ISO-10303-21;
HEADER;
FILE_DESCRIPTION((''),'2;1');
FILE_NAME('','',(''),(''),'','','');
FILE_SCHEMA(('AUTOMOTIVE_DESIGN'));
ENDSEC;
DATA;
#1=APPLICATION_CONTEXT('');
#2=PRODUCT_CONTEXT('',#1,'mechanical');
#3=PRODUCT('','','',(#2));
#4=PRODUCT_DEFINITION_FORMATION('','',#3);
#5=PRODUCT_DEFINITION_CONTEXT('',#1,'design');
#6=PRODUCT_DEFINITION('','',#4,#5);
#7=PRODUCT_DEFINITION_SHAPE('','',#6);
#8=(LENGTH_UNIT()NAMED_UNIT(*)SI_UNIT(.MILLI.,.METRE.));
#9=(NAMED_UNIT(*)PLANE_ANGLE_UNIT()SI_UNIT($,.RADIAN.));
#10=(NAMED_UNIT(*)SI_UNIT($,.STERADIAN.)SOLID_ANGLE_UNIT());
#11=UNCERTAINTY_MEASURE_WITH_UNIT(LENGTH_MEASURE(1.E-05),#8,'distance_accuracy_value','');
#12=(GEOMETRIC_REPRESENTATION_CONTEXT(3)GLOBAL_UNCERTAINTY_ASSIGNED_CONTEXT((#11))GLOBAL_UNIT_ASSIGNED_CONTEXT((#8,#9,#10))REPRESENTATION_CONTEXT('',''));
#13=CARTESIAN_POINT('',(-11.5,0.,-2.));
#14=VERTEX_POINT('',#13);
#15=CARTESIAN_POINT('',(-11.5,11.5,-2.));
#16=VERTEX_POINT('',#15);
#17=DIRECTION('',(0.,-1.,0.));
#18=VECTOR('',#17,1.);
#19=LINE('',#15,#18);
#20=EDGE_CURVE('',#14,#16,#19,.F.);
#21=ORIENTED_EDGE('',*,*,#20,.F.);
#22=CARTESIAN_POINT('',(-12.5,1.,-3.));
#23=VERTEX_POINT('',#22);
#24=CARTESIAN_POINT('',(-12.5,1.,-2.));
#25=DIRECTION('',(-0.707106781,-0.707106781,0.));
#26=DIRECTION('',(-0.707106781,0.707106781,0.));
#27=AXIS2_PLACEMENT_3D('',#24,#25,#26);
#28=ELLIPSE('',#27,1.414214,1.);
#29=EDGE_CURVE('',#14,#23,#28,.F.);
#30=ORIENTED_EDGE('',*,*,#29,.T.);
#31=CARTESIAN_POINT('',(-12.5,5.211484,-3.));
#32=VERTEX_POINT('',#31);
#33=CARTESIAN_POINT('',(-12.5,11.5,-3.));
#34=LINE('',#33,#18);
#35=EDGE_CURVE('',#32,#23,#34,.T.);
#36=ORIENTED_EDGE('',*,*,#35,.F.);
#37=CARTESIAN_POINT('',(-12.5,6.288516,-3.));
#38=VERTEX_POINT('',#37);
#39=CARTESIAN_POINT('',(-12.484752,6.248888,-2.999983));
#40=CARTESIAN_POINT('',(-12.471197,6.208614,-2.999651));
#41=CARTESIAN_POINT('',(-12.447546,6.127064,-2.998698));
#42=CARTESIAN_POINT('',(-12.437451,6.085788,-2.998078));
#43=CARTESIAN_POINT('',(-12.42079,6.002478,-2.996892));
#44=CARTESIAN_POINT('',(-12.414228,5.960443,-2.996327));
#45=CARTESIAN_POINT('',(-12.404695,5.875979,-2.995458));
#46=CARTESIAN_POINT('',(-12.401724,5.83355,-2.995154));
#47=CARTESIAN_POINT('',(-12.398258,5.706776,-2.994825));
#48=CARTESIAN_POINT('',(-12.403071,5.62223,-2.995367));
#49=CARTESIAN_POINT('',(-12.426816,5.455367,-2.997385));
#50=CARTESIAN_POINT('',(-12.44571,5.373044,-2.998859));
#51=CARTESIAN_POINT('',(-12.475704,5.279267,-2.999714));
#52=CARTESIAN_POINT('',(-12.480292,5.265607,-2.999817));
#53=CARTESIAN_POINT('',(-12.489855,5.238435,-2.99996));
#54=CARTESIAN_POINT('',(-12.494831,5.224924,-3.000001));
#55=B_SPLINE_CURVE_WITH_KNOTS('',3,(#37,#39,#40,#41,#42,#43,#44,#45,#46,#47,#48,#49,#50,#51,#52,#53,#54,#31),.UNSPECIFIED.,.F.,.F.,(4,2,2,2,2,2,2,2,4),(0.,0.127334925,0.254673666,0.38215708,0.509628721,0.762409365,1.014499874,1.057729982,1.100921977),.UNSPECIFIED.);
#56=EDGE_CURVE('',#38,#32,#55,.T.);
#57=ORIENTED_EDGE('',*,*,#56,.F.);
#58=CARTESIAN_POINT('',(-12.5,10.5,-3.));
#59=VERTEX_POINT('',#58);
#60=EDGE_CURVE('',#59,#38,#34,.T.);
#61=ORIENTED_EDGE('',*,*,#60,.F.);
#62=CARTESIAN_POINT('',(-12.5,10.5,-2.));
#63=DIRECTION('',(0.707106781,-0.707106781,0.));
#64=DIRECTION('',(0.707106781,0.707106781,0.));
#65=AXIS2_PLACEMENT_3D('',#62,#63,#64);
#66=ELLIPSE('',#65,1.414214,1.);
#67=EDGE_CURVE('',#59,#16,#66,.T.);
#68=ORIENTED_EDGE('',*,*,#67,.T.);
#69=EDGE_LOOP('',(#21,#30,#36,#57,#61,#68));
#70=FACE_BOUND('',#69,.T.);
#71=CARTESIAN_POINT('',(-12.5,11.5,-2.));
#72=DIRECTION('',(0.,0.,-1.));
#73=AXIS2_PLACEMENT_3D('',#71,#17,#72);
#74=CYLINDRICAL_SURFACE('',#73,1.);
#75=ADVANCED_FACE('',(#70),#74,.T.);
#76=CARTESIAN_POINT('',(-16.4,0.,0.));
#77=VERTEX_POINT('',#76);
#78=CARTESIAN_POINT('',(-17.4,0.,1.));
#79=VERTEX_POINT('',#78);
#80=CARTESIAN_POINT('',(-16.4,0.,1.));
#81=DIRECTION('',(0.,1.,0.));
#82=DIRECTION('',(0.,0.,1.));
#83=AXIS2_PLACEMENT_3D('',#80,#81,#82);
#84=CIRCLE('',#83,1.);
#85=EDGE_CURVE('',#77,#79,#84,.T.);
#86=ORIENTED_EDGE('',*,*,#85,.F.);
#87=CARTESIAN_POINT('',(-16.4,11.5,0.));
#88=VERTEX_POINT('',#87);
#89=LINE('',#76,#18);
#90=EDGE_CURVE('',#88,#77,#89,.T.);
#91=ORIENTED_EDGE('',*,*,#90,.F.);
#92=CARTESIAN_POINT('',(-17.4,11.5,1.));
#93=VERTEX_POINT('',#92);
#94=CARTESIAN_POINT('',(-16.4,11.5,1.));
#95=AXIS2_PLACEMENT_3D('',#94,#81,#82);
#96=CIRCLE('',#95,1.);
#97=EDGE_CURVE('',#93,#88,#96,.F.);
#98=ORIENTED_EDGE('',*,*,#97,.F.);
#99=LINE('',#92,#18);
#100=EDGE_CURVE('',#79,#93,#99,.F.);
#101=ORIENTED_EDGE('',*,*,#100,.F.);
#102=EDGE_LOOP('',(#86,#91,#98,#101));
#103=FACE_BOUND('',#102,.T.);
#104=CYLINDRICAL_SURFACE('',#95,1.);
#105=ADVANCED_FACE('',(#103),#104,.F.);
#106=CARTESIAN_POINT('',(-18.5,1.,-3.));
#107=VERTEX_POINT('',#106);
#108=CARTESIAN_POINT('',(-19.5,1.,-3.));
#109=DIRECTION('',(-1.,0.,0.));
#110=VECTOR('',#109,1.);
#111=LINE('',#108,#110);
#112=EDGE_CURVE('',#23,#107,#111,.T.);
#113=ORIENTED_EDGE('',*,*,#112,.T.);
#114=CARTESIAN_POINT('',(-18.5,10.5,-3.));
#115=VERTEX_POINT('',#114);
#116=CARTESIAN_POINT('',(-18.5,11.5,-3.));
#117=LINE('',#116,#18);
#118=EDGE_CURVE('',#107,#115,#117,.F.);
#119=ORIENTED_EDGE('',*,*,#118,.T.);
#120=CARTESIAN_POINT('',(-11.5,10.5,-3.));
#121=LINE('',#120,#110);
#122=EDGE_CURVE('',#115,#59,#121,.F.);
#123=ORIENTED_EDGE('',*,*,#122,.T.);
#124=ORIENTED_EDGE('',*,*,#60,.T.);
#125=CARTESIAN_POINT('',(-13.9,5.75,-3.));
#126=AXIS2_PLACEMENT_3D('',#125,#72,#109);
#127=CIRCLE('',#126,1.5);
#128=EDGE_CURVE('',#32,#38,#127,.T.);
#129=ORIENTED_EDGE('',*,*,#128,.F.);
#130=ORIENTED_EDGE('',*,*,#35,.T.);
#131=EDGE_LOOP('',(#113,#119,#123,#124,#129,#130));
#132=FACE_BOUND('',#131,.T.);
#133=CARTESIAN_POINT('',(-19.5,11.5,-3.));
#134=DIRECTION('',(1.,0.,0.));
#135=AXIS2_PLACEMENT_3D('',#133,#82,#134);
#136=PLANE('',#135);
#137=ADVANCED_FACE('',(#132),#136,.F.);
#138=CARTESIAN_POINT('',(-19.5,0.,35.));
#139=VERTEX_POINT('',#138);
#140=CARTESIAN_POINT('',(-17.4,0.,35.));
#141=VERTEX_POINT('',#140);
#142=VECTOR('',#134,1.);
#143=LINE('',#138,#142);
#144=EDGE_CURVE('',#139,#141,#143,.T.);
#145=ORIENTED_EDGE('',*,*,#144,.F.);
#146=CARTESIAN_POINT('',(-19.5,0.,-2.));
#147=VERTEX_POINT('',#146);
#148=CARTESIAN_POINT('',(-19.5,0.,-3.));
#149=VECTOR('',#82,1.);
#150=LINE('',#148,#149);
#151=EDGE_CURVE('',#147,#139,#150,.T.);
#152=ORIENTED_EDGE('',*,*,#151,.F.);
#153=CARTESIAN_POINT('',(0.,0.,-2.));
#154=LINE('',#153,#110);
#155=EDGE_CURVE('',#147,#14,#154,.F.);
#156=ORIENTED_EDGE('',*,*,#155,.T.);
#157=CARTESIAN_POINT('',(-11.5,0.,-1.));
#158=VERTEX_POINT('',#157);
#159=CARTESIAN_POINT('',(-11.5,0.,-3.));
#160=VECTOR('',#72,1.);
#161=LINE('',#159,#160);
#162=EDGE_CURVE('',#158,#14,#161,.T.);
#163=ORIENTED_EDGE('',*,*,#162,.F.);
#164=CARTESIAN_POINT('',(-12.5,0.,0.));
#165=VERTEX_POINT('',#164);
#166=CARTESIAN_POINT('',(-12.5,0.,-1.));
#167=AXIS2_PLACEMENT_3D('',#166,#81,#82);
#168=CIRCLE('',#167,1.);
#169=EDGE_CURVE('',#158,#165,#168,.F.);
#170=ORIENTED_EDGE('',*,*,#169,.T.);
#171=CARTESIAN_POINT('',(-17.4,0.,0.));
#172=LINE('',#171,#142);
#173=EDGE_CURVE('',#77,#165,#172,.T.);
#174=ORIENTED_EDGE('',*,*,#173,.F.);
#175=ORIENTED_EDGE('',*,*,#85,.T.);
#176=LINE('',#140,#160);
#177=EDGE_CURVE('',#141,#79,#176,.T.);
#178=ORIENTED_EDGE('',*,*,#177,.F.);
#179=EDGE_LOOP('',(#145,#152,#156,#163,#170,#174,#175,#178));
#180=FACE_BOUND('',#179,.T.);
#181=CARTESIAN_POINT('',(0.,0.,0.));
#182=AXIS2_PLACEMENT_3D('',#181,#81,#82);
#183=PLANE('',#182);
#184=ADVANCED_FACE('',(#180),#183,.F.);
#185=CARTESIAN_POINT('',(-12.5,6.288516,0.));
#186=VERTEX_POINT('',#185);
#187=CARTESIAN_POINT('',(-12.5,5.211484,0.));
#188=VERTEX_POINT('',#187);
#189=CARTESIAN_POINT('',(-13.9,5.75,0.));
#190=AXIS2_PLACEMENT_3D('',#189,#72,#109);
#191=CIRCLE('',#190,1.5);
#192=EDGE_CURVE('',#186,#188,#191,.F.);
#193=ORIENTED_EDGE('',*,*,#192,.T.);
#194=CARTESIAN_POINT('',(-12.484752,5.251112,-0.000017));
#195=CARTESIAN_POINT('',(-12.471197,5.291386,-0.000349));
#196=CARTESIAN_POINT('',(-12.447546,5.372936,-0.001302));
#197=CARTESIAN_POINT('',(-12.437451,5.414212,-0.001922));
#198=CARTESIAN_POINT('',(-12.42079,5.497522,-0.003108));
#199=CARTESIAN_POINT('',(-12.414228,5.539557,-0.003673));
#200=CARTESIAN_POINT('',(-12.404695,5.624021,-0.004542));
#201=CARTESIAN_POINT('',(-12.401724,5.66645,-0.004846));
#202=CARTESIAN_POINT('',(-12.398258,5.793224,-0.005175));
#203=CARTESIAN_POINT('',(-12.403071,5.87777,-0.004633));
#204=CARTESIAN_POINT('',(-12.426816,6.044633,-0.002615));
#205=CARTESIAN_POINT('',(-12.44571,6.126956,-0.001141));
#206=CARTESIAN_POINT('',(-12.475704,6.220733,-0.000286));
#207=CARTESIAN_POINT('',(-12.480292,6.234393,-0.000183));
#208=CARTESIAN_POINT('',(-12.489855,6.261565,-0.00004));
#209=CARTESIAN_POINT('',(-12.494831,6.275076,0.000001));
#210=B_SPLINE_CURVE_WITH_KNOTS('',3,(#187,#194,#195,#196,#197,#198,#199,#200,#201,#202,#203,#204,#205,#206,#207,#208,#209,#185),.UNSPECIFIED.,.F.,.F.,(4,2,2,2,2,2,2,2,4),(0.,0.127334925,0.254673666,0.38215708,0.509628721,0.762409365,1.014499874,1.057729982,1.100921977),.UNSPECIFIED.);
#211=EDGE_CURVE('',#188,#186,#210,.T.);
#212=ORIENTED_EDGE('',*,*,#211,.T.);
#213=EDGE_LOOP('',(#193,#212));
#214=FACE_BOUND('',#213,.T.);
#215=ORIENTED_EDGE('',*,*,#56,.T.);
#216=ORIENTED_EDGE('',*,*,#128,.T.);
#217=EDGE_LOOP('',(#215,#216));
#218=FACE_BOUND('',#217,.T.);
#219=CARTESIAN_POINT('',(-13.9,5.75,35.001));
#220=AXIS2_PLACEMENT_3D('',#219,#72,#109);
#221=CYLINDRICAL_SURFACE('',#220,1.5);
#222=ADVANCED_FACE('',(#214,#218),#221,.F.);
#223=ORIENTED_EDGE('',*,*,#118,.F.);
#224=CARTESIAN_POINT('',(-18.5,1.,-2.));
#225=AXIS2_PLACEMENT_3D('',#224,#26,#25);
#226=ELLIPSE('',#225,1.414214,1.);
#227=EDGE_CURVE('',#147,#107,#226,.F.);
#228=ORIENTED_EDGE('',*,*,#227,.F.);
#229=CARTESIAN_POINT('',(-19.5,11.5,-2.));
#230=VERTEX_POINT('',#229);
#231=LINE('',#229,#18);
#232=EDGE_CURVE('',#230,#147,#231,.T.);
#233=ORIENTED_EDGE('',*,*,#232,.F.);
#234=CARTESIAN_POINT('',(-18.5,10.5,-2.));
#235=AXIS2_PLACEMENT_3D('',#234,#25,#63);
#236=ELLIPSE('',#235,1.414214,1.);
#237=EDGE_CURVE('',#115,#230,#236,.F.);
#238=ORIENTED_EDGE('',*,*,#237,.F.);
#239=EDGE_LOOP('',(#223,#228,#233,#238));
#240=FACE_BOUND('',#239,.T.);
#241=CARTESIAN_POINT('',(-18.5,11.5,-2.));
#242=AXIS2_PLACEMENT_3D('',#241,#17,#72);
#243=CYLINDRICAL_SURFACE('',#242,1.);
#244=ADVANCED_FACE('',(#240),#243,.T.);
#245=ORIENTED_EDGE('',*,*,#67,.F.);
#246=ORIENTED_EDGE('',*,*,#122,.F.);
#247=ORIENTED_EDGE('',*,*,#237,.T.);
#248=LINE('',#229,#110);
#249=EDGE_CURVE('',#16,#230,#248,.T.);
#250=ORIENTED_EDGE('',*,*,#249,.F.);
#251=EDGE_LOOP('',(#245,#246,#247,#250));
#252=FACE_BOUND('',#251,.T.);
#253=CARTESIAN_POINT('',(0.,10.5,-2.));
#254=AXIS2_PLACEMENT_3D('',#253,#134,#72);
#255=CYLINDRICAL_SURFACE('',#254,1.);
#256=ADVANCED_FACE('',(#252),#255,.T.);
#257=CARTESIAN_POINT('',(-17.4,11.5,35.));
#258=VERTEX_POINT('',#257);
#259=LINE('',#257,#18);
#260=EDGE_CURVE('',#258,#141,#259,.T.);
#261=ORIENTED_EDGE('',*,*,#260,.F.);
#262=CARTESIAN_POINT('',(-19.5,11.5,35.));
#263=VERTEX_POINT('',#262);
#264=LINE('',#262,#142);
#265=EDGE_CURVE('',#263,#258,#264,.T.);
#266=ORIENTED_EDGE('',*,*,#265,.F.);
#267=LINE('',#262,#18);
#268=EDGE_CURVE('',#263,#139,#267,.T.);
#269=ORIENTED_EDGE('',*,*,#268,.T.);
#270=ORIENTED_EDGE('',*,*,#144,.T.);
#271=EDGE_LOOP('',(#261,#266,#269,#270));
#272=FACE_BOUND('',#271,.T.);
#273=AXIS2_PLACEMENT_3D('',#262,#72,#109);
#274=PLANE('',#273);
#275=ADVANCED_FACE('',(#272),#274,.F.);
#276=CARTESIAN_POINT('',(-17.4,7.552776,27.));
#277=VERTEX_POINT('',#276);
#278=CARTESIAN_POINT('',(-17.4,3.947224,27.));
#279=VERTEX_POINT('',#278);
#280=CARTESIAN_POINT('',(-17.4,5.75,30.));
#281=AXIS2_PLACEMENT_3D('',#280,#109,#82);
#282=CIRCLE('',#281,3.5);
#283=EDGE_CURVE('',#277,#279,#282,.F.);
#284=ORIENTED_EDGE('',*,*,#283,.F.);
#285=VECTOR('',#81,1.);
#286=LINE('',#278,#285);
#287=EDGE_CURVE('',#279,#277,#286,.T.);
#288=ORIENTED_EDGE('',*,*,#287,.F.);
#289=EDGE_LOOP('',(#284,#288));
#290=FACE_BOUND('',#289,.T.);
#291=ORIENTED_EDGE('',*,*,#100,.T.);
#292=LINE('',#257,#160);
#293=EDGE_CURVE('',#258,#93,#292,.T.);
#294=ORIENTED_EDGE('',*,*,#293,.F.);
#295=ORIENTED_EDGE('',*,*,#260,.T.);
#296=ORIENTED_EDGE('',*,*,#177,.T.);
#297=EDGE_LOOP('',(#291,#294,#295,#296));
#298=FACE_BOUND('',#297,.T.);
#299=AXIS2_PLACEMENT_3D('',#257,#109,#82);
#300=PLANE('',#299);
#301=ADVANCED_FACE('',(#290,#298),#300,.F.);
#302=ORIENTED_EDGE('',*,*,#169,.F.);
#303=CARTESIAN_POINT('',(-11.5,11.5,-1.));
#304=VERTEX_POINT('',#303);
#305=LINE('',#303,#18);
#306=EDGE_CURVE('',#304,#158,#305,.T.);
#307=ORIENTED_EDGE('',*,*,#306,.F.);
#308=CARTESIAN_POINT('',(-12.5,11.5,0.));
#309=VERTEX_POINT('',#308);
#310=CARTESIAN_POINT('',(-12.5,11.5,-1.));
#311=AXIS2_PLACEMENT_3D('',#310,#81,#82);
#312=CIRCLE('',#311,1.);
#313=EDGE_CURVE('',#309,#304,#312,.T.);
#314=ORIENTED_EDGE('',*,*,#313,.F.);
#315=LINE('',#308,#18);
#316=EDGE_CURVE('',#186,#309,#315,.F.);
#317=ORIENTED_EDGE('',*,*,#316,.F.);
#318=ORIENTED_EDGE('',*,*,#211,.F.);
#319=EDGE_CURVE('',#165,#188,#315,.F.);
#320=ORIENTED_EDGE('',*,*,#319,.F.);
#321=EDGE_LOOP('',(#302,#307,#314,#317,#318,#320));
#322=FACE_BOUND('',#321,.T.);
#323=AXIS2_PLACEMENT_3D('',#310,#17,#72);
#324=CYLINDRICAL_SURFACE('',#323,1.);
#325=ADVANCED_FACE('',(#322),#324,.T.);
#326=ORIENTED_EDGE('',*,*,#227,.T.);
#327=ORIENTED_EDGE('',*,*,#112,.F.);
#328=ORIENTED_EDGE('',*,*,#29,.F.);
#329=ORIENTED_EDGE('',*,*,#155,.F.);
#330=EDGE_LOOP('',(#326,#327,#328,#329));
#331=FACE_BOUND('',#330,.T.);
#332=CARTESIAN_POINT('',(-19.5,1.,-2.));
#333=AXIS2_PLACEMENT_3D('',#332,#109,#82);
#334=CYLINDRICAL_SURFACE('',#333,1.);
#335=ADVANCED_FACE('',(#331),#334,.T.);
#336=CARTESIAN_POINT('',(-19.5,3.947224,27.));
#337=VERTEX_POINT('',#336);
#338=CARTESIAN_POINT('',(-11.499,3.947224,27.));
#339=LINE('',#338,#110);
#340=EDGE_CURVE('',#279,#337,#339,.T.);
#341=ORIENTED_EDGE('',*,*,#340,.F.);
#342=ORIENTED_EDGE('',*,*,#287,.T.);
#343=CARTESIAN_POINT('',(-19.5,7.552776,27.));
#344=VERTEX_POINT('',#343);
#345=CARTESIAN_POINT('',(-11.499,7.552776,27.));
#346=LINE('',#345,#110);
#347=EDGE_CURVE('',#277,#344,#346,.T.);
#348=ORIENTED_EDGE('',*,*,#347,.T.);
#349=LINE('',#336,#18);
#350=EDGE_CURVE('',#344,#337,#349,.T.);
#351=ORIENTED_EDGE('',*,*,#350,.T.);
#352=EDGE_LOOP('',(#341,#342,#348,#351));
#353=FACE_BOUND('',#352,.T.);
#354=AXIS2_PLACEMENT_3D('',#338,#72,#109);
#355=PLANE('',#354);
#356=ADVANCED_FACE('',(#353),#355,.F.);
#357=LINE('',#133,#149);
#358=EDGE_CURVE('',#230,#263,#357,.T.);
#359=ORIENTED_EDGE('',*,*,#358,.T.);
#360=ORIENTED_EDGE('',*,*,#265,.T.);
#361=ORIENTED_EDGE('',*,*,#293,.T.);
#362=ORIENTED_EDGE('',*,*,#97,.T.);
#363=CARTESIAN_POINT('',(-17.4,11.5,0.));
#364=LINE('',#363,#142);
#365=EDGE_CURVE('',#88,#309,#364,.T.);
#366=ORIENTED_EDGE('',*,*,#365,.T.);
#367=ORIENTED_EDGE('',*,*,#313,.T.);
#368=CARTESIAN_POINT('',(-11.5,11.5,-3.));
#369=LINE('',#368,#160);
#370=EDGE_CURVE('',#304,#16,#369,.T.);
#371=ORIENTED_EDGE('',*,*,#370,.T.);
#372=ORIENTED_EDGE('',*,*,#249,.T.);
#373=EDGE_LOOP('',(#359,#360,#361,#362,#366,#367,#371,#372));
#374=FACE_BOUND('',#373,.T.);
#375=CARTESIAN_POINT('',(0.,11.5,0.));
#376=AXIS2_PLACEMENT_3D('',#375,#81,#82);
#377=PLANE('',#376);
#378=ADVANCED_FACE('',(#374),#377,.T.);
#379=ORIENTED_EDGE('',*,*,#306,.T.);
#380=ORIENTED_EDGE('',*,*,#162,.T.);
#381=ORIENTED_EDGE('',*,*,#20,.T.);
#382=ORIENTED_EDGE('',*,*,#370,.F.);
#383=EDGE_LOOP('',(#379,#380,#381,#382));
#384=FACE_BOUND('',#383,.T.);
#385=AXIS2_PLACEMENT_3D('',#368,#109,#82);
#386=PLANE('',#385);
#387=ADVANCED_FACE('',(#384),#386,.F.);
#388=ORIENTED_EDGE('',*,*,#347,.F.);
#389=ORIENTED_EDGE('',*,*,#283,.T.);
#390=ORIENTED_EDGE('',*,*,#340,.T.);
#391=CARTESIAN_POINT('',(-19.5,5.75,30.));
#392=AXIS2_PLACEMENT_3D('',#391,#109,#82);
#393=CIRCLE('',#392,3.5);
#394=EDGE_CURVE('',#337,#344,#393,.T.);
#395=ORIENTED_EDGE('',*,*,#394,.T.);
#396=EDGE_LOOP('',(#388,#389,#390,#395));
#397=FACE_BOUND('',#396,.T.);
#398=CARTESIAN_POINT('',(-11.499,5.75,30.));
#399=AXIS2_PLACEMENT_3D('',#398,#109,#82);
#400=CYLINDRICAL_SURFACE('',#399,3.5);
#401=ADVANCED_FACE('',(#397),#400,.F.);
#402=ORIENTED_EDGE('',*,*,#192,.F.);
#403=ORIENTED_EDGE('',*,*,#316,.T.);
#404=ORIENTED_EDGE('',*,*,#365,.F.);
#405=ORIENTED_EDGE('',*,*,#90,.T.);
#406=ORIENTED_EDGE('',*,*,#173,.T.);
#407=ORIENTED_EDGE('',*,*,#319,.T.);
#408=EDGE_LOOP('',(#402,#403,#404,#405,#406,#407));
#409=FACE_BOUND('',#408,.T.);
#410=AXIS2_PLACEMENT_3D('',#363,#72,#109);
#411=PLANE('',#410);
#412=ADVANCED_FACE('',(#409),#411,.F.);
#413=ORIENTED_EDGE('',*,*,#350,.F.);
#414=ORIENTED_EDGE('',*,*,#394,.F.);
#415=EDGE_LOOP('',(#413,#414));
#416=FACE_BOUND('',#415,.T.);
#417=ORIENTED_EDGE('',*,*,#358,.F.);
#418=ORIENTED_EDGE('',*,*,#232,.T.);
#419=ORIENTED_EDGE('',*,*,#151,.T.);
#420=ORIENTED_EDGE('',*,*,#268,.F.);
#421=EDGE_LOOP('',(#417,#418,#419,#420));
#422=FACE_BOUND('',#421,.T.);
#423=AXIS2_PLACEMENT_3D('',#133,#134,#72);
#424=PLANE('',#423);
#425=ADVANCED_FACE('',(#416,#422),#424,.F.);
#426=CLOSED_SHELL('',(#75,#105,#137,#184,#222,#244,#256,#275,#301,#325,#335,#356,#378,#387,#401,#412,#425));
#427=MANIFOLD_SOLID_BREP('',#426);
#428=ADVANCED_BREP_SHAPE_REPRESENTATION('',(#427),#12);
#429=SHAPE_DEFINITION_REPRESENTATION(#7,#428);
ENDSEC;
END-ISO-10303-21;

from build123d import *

# Parameters (mm, degrees)
BOSS_EXTRUDE2_DEPTH = 11.5
CUT_EXTRUDE1_REACH  = 46.232
SKETCH4_R           = 1.5
CUT_EXTRUDE2_REACH  = 39.699
FILLET2_R           = 1


with BuildPart() as part:
    # Sketch3 → Boss-Extrude2 (new body)
    with BuildSketch(Plane(origin=(0, 0, 0), x_dir=(1, 0, 0), z_dir=(0, 1, 0))):
        Polygon((-19.5, 3), (-11.5, 3), (-11.5, 0), (-17.4, 0), (-17.4, -35), (-19.5, -35), align=None)
    extrude(amount=BOSS_EXTRUDE2_DEPTH)

    # Sketch4 → Cut-Extrude1 (cut, up to next)
    with BuildSketch(Plane(origin=(0, 0, -3), x_dir=(-1, 0, 0), z_dir=(0, 0, -1)), mode=Mode.PRIVATE) as cut_extrude1_sk1:
        with Locations((13.9, 5.75)):
            Circle(SKETCH4_R)
    cut_extrude1_tool1 = extrude(cut_extrude1_sk1.sketch, amount=-CUT_EXTRUDE1_REACH, mode=Mode.PRIVATE) & part.part
    add(cut_extrude1_tool1.solids().sort_by_distance((-13.9, 5.75, -3))[0], mode=Mode.SUBTRACT)

    # Sketch5 → Cut-Extrude2 (cut, up to next)
    with BuildSketch(Plane.ZY.offset(19.5), mode=Mode.PRIVATE) as cut_extrude2_sk1:
        with BuildLine():
            Line((27, 3.947224362), (27, 7.552775638))
            ThreePointArc((27, 7.552775638), (33.5, 5.75), (27, 3.947224362))
        make_face()
    cut_extrude2_tool1 = extrude(cut_extrude2_sk1.sketch, amount=-CUT_EXTRUDE2_REACH, mode=Mode.PRIVATE) & part.part
    add(cut_extrude2_tool1.solids().sort_by_distance((-19.5, 5.75, 30.104819))[0], mode=Mode.SUBTRACT)

    # Fillet2
    # the kernel refuses this fillet: 1 mm, written as the material it adds along each edge
    with BuildSketch(Plane(origin=(-17.4, 0, 0), x_dir=(1, 0, 0), z_dir=(0, 1, 0))) as fillet2_piece_1:
        with BuildLine():
            CenterArc((FILLET2_R, -FILLET2_R), FILLET2_R, 90, 90)
            Line((0, -FILLET2_R), (0, 0))
            Line((0, 0), (FILLET2_R, 0))
        make_face()
    extrude(amount=11.5)
    # the kernel refuses this fillet: 1 mm, written as the material it takes off along each edge
    with BuildSketch(Plane(origin=(-19.5, -2.5, -3), x_dir=(1, 0, 0), z_dir=(0, 1, 0))) as fillet2_2_piece_1:
        with BuildLine():
            CenterArc((FILLET2_R, -FILLET2_R), FILLET2_R, 90, 90)
            Line((0, -FILLET2_R), (0, 0))
            Line((0, 0), (FILLET2_R, 0))
        make_face()
    extrude(amount=16.5, mode=Mode.SUBTRACT)
    with BuildSketch(Plane(origin=(-11.5, -2.5, -3), x_dir=(-1, 0, 0), z_dir=(0, 1, 0)), Plane(origin=(-11.5, -2.5, 0), x_dir=(0, 0, -1), z_dir=(0, 1, 0))) as fillet2_2_piece_2:
        with BuildLine():
            CenterArc((FILLET2_R, FILLET2_R), FILLET2_R, 180, 90)
            Line((0, FILLET2_R), (0, 0))
            Line((0, 0), (FILLET2_R, 0))
        make_face()
    extrude(amount=16.5, mode=Mode.SUBTRACT)
    with BuildSketch(Plane(origin=(-22, 11.5, -3), x_dir=(0, -1, 0), z_dir=(1, 0, 0))) as fillet2_2_piece_3:
        with BuildLine():
            CenterArc((FILLET2_R, -FILLET2_R), FILLET2_R, 90, 90)
            Line((0, -FILLET2_R), (0, 0))
            Line((0, 0), (FILLET2_R, 0))
        make_face()
    extrude(amount=13, mode=Mode.SUBTRACT)
    with BuildSketch(Plane(origin=(-22, 0, -3), x_dir=(0, 1, 0), z_dir=(1, 0, 0))) as fillet2_2_piece_4:
        with BuildLine():
            CenterArc((FILLET2_R, FILLET2_R), FILLET2_R, 180, 90)
            Line((0, FILLET2_R), (0, 0))
            Line((0, 0), (FILLET2_R, 0))
        make_face()
    extrude(amount=13, mode=Mode.SUBTRACT)


solid = part.part
